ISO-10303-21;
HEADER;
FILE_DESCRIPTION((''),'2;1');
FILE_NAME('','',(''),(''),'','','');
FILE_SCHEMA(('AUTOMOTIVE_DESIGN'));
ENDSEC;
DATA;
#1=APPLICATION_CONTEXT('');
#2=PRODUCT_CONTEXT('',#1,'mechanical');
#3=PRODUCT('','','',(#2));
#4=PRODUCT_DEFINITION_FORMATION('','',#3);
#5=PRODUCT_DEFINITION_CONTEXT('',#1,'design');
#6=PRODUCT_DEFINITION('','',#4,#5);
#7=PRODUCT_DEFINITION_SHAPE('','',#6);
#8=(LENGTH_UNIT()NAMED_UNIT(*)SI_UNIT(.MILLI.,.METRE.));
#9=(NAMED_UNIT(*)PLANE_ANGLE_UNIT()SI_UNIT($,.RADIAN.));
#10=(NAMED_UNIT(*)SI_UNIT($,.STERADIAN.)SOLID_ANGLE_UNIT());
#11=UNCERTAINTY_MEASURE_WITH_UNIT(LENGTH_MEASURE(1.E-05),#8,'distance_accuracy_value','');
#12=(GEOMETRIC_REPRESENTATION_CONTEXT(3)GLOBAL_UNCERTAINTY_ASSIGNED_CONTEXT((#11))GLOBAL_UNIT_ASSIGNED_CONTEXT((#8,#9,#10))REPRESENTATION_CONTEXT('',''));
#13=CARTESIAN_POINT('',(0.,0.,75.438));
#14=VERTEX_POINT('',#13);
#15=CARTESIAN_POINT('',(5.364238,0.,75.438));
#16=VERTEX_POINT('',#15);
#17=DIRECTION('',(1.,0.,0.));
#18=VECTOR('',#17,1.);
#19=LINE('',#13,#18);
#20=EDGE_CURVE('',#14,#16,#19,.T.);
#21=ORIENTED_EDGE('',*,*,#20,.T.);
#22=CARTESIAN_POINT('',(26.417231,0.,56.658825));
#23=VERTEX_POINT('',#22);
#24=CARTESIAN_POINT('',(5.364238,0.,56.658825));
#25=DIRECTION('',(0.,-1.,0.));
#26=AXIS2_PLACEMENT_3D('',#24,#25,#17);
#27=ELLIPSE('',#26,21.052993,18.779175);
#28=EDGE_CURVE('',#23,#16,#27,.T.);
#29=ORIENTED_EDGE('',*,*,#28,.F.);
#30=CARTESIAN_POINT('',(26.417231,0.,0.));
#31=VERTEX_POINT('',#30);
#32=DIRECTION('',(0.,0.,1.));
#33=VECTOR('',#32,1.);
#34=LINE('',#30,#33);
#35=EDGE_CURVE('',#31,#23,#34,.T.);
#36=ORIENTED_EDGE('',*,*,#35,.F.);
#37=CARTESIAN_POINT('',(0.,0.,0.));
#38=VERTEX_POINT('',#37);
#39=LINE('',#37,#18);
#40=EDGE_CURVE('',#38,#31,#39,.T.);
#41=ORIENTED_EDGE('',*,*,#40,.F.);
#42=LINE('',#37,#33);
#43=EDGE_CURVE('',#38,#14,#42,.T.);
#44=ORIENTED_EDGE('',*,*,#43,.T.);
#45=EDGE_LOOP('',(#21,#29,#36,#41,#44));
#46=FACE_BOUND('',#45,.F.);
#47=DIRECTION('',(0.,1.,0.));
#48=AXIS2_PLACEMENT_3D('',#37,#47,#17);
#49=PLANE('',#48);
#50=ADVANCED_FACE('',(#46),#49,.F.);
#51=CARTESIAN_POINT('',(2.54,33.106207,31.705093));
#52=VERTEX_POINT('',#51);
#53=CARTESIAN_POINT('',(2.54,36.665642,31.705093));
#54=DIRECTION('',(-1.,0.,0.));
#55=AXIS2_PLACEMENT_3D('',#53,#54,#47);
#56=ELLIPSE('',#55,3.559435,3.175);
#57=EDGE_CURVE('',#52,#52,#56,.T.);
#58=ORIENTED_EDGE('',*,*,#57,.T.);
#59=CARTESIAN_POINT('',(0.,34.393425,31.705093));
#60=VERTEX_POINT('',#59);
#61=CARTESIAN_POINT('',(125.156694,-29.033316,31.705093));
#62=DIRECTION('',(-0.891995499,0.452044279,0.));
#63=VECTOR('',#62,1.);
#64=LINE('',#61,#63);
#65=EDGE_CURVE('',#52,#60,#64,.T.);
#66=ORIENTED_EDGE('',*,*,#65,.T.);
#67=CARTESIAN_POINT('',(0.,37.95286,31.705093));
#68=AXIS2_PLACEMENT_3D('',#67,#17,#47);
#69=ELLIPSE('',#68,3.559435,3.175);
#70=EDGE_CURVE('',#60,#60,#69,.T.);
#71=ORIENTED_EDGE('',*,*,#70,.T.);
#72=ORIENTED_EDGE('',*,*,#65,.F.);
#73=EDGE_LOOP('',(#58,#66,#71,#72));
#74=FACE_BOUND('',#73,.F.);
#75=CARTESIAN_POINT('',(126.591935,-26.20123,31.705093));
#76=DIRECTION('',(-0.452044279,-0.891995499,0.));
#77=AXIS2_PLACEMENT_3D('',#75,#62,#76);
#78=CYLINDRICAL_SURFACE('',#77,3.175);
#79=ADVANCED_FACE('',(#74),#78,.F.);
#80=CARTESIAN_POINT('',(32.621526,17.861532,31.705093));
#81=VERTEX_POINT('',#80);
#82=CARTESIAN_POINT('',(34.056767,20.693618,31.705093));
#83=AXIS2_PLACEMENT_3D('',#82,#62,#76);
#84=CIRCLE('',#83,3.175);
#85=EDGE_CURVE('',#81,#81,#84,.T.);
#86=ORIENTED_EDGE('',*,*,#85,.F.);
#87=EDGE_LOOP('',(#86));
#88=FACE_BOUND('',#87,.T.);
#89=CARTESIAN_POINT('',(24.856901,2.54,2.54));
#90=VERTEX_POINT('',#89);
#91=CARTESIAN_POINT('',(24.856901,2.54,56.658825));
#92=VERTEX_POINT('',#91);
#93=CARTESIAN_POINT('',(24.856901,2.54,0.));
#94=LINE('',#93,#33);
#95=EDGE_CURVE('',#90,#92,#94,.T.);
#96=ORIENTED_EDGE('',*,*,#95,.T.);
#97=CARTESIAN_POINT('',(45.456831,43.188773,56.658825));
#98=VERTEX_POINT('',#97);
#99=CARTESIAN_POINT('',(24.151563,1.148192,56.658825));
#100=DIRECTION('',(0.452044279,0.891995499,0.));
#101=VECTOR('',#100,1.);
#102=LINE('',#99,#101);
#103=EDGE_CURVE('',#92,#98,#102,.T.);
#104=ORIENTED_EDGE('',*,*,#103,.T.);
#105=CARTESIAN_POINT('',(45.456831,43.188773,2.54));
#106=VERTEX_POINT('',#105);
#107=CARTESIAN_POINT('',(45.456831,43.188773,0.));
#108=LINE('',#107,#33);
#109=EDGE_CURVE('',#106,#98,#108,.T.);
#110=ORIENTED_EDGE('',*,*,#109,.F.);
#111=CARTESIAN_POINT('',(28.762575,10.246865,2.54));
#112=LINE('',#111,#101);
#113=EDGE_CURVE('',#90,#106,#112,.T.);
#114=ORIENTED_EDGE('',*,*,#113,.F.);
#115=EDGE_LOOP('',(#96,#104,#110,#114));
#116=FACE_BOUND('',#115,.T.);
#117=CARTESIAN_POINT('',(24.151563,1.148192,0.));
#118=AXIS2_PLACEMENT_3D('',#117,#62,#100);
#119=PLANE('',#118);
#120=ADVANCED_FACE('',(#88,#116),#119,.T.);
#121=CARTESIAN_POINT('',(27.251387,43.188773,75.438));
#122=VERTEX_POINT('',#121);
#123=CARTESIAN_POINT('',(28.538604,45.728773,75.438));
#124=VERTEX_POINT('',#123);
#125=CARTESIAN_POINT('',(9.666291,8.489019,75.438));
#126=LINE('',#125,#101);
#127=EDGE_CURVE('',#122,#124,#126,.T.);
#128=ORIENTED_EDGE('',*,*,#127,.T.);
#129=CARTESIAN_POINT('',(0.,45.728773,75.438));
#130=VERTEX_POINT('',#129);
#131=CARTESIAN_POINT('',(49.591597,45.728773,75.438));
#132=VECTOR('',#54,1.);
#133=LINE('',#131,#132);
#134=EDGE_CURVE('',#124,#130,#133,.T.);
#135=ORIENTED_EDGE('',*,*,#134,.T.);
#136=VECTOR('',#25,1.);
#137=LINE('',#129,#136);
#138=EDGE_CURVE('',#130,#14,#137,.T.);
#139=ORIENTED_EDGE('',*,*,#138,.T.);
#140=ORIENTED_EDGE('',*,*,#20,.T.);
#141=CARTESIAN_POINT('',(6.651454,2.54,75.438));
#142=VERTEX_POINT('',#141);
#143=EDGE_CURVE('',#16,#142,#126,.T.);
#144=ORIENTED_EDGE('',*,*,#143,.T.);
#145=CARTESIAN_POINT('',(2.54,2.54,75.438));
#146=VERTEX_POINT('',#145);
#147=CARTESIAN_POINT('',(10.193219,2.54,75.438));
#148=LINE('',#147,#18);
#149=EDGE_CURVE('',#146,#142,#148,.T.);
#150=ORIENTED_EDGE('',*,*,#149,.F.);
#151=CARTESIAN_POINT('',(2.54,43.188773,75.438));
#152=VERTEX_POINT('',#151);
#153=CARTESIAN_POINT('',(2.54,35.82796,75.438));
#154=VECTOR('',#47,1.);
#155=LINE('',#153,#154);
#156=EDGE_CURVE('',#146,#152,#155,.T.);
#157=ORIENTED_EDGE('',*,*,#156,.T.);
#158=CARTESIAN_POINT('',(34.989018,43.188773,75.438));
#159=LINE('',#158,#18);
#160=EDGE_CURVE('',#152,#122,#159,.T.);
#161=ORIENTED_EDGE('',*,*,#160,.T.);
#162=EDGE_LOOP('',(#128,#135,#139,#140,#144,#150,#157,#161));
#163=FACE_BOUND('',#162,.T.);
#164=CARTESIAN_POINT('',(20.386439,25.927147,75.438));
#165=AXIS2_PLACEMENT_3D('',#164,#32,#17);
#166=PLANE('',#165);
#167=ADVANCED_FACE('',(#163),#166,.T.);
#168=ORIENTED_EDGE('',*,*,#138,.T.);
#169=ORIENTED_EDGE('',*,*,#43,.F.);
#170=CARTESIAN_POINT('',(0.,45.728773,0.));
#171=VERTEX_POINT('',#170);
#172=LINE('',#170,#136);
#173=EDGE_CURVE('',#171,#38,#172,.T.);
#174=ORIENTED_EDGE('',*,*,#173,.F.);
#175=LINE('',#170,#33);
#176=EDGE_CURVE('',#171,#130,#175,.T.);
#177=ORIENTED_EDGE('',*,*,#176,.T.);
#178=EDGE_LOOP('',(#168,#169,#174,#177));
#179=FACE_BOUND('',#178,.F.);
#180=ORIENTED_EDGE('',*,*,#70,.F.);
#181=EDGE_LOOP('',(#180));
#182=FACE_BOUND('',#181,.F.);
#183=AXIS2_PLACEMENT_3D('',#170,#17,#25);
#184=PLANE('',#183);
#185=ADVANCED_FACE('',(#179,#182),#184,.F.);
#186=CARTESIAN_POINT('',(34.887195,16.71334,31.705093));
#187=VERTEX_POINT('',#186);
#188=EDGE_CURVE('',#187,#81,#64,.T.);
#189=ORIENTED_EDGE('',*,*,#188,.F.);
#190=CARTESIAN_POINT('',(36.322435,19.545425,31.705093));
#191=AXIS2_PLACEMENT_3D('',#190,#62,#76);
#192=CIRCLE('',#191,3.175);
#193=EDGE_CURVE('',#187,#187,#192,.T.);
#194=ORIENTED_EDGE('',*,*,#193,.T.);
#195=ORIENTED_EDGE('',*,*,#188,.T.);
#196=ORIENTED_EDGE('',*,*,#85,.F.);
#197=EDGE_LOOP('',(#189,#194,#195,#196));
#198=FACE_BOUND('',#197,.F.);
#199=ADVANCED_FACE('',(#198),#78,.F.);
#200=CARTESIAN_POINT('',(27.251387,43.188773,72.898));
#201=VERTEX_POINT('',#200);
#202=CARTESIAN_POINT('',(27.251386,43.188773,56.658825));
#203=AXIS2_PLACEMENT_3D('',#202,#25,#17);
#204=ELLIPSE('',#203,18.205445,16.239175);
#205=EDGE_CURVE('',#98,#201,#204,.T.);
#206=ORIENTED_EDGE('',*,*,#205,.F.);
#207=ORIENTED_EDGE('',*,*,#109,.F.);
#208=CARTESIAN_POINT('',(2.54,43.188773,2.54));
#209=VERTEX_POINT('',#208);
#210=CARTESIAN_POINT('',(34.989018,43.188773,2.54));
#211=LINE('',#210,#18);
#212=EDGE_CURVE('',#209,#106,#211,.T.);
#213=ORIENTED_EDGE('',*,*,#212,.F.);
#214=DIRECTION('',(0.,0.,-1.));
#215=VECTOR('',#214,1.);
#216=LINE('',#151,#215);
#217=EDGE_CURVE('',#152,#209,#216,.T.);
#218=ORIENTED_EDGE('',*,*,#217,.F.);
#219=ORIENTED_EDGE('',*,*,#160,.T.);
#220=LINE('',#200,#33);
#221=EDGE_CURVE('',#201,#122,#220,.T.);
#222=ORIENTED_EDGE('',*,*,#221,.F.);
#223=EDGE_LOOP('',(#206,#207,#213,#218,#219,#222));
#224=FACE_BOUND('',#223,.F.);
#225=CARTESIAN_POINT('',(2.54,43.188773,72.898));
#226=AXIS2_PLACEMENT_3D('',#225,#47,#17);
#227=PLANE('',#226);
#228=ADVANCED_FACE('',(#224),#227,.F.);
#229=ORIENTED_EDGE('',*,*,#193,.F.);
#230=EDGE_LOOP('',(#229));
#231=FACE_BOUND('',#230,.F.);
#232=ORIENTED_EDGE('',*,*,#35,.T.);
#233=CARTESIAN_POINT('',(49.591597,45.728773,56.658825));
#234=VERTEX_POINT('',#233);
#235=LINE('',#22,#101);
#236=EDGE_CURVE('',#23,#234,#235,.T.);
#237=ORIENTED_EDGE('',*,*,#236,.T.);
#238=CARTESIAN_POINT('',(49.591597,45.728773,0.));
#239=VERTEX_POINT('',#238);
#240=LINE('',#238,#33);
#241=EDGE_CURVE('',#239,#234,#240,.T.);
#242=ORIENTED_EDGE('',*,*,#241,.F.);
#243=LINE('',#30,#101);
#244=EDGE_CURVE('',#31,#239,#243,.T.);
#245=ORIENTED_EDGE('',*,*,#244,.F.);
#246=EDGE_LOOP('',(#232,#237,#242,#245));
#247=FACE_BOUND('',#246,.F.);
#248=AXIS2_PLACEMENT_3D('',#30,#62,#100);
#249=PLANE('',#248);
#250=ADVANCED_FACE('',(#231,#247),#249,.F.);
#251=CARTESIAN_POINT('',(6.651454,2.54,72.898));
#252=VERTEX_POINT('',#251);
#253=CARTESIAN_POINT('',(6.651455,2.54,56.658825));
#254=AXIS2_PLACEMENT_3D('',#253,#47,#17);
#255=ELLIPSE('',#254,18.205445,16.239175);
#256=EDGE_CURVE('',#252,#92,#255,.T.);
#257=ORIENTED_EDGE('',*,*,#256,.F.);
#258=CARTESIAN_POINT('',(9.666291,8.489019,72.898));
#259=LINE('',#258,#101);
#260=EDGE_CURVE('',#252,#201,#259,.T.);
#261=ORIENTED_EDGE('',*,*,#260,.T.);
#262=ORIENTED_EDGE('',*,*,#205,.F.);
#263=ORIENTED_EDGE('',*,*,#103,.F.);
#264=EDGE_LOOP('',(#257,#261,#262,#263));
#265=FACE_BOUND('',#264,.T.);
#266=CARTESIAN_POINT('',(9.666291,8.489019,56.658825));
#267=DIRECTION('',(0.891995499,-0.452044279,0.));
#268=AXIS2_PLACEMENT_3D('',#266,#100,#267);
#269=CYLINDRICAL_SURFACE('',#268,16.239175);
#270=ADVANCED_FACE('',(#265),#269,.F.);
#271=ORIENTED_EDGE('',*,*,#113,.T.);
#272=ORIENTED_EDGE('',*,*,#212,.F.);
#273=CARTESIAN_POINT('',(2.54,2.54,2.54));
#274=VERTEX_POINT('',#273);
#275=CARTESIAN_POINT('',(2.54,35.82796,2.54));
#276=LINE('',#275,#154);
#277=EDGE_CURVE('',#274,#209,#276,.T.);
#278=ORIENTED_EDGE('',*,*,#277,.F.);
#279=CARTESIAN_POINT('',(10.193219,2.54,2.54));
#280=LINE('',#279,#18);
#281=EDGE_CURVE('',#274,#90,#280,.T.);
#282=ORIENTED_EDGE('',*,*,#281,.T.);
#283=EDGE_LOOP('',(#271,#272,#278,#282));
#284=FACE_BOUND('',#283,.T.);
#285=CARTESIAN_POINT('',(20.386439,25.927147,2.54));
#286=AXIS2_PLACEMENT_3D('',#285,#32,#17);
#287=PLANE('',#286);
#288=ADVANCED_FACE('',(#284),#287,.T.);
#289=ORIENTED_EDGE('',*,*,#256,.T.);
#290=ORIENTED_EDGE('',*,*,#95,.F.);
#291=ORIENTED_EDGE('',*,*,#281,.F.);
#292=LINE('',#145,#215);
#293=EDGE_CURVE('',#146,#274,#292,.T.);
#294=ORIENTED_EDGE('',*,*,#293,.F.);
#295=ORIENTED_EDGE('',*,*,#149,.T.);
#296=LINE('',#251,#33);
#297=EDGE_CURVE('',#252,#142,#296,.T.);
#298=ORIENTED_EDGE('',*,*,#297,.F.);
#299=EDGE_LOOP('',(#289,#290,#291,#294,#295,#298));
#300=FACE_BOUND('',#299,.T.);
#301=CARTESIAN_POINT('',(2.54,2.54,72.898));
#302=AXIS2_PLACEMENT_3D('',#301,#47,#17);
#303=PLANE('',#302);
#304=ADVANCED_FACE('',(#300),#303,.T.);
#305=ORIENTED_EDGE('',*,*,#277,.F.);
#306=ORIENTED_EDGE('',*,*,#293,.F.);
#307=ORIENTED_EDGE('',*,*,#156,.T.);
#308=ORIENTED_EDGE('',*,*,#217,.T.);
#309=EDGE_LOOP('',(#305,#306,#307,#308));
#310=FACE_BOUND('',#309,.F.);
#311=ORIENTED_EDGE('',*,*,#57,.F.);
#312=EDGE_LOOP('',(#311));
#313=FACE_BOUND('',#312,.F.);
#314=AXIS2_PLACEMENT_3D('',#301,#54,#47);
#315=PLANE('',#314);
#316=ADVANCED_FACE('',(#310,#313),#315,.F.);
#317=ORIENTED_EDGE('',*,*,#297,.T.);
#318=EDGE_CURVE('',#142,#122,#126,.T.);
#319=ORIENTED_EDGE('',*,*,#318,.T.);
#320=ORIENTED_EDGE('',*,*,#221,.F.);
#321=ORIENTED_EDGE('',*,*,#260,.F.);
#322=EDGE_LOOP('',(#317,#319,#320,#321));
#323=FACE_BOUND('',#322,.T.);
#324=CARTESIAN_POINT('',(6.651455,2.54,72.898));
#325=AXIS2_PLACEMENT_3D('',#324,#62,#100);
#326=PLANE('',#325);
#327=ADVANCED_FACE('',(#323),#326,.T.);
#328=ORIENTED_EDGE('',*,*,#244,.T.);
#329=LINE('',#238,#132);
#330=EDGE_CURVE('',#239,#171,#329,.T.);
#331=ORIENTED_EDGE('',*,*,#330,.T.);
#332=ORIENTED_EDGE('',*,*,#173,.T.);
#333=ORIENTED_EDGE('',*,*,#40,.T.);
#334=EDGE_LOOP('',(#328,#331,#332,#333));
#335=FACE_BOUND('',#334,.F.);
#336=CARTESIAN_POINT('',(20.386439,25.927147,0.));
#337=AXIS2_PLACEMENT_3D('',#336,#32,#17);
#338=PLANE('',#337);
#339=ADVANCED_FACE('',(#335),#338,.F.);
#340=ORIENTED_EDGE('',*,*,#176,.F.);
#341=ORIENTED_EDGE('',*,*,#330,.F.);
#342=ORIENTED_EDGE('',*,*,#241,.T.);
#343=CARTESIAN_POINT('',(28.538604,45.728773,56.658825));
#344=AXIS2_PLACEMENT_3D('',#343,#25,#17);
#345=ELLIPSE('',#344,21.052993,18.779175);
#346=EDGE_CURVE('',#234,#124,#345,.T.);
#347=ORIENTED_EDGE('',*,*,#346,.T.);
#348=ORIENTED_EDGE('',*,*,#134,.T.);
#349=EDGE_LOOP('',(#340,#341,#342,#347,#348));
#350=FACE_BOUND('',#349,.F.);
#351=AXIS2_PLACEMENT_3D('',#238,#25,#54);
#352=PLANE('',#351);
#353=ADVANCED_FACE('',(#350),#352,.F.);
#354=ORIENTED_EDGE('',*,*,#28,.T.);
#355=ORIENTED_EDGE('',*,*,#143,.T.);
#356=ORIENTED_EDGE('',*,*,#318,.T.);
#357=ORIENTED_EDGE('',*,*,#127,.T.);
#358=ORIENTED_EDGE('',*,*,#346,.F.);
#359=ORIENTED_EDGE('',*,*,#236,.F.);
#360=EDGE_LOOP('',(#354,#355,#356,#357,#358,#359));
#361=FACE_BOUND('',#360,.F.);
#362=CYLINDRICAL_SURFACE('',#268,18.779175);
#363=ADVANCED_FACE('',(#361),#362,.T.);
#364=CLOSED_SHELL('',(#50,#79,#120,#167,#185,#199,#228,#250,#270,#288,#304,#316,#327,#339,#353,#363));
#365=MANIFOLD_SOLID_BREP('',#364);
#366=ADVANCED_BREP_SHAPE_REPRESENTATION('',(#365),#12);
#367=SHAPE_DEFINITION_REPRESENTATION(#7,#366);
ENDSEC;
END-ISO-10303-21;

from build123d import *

# Parameters (mm, degrees)
F1_DEPTH = 75.438
F2_R     = 18.7791754174
F3_T     = -2.54
F5_D     = 6.35


# Not quite as in the source:
# - a shell that OpenCascade refuses in one call is made with other operations: the cavity is built on its own and cut out


with BuildPart() as f1:
    # F0 (on Top) → F1 (new body)
    with BuildSketch(Plane.XY):
        Polygon((0, 45.7287728786), (0, 0), (26.4172311872, 0), (49.5915971696, 45.7287728786), align=None)
    extrude(amount=F1_DEPTH)

    # F2
    f2_edges = [f1.edges().sort_by_distance(p)[0] for p in [
        (38.004414, 22.864386, 75.438),
    ]]
    fillet(f2_edges, radius=F2_R)

    # F3: a shell. OpenCascade refuses it in one call, so the cavity is built on its own and cut out:
    # the body offset inwards by the wall thickness, plus a prism from it out through each open face.
    f3_core = offset(f1.part, amount=F3_T, kind=Kind.INTERSECTION, mode=Mode.PRIVATE)
    f3_exits = [f3_core.faces().sort_by_distance(p)[0] for p in [
        (10.972623, 27.706391, 72.898),
    ]]
    add(f3_core, mode=Mode.SUBTRACT)
    extrude(f3_exits, amount=-F3_T, mode=Mode.SUBTRACT)

    # F5 (through all)
    with Locations(Plane(origin=(21.0190277096, -10.6519945775, 0), x_dir=(0.4520442786, 0.891995499, 0), z_dir=(0.891995499, -0.4520442786, 0))):
        with Locations((33.8537804782, 31.7050926387)):
            Hole(F5_D / 2)


solid = f1.part
